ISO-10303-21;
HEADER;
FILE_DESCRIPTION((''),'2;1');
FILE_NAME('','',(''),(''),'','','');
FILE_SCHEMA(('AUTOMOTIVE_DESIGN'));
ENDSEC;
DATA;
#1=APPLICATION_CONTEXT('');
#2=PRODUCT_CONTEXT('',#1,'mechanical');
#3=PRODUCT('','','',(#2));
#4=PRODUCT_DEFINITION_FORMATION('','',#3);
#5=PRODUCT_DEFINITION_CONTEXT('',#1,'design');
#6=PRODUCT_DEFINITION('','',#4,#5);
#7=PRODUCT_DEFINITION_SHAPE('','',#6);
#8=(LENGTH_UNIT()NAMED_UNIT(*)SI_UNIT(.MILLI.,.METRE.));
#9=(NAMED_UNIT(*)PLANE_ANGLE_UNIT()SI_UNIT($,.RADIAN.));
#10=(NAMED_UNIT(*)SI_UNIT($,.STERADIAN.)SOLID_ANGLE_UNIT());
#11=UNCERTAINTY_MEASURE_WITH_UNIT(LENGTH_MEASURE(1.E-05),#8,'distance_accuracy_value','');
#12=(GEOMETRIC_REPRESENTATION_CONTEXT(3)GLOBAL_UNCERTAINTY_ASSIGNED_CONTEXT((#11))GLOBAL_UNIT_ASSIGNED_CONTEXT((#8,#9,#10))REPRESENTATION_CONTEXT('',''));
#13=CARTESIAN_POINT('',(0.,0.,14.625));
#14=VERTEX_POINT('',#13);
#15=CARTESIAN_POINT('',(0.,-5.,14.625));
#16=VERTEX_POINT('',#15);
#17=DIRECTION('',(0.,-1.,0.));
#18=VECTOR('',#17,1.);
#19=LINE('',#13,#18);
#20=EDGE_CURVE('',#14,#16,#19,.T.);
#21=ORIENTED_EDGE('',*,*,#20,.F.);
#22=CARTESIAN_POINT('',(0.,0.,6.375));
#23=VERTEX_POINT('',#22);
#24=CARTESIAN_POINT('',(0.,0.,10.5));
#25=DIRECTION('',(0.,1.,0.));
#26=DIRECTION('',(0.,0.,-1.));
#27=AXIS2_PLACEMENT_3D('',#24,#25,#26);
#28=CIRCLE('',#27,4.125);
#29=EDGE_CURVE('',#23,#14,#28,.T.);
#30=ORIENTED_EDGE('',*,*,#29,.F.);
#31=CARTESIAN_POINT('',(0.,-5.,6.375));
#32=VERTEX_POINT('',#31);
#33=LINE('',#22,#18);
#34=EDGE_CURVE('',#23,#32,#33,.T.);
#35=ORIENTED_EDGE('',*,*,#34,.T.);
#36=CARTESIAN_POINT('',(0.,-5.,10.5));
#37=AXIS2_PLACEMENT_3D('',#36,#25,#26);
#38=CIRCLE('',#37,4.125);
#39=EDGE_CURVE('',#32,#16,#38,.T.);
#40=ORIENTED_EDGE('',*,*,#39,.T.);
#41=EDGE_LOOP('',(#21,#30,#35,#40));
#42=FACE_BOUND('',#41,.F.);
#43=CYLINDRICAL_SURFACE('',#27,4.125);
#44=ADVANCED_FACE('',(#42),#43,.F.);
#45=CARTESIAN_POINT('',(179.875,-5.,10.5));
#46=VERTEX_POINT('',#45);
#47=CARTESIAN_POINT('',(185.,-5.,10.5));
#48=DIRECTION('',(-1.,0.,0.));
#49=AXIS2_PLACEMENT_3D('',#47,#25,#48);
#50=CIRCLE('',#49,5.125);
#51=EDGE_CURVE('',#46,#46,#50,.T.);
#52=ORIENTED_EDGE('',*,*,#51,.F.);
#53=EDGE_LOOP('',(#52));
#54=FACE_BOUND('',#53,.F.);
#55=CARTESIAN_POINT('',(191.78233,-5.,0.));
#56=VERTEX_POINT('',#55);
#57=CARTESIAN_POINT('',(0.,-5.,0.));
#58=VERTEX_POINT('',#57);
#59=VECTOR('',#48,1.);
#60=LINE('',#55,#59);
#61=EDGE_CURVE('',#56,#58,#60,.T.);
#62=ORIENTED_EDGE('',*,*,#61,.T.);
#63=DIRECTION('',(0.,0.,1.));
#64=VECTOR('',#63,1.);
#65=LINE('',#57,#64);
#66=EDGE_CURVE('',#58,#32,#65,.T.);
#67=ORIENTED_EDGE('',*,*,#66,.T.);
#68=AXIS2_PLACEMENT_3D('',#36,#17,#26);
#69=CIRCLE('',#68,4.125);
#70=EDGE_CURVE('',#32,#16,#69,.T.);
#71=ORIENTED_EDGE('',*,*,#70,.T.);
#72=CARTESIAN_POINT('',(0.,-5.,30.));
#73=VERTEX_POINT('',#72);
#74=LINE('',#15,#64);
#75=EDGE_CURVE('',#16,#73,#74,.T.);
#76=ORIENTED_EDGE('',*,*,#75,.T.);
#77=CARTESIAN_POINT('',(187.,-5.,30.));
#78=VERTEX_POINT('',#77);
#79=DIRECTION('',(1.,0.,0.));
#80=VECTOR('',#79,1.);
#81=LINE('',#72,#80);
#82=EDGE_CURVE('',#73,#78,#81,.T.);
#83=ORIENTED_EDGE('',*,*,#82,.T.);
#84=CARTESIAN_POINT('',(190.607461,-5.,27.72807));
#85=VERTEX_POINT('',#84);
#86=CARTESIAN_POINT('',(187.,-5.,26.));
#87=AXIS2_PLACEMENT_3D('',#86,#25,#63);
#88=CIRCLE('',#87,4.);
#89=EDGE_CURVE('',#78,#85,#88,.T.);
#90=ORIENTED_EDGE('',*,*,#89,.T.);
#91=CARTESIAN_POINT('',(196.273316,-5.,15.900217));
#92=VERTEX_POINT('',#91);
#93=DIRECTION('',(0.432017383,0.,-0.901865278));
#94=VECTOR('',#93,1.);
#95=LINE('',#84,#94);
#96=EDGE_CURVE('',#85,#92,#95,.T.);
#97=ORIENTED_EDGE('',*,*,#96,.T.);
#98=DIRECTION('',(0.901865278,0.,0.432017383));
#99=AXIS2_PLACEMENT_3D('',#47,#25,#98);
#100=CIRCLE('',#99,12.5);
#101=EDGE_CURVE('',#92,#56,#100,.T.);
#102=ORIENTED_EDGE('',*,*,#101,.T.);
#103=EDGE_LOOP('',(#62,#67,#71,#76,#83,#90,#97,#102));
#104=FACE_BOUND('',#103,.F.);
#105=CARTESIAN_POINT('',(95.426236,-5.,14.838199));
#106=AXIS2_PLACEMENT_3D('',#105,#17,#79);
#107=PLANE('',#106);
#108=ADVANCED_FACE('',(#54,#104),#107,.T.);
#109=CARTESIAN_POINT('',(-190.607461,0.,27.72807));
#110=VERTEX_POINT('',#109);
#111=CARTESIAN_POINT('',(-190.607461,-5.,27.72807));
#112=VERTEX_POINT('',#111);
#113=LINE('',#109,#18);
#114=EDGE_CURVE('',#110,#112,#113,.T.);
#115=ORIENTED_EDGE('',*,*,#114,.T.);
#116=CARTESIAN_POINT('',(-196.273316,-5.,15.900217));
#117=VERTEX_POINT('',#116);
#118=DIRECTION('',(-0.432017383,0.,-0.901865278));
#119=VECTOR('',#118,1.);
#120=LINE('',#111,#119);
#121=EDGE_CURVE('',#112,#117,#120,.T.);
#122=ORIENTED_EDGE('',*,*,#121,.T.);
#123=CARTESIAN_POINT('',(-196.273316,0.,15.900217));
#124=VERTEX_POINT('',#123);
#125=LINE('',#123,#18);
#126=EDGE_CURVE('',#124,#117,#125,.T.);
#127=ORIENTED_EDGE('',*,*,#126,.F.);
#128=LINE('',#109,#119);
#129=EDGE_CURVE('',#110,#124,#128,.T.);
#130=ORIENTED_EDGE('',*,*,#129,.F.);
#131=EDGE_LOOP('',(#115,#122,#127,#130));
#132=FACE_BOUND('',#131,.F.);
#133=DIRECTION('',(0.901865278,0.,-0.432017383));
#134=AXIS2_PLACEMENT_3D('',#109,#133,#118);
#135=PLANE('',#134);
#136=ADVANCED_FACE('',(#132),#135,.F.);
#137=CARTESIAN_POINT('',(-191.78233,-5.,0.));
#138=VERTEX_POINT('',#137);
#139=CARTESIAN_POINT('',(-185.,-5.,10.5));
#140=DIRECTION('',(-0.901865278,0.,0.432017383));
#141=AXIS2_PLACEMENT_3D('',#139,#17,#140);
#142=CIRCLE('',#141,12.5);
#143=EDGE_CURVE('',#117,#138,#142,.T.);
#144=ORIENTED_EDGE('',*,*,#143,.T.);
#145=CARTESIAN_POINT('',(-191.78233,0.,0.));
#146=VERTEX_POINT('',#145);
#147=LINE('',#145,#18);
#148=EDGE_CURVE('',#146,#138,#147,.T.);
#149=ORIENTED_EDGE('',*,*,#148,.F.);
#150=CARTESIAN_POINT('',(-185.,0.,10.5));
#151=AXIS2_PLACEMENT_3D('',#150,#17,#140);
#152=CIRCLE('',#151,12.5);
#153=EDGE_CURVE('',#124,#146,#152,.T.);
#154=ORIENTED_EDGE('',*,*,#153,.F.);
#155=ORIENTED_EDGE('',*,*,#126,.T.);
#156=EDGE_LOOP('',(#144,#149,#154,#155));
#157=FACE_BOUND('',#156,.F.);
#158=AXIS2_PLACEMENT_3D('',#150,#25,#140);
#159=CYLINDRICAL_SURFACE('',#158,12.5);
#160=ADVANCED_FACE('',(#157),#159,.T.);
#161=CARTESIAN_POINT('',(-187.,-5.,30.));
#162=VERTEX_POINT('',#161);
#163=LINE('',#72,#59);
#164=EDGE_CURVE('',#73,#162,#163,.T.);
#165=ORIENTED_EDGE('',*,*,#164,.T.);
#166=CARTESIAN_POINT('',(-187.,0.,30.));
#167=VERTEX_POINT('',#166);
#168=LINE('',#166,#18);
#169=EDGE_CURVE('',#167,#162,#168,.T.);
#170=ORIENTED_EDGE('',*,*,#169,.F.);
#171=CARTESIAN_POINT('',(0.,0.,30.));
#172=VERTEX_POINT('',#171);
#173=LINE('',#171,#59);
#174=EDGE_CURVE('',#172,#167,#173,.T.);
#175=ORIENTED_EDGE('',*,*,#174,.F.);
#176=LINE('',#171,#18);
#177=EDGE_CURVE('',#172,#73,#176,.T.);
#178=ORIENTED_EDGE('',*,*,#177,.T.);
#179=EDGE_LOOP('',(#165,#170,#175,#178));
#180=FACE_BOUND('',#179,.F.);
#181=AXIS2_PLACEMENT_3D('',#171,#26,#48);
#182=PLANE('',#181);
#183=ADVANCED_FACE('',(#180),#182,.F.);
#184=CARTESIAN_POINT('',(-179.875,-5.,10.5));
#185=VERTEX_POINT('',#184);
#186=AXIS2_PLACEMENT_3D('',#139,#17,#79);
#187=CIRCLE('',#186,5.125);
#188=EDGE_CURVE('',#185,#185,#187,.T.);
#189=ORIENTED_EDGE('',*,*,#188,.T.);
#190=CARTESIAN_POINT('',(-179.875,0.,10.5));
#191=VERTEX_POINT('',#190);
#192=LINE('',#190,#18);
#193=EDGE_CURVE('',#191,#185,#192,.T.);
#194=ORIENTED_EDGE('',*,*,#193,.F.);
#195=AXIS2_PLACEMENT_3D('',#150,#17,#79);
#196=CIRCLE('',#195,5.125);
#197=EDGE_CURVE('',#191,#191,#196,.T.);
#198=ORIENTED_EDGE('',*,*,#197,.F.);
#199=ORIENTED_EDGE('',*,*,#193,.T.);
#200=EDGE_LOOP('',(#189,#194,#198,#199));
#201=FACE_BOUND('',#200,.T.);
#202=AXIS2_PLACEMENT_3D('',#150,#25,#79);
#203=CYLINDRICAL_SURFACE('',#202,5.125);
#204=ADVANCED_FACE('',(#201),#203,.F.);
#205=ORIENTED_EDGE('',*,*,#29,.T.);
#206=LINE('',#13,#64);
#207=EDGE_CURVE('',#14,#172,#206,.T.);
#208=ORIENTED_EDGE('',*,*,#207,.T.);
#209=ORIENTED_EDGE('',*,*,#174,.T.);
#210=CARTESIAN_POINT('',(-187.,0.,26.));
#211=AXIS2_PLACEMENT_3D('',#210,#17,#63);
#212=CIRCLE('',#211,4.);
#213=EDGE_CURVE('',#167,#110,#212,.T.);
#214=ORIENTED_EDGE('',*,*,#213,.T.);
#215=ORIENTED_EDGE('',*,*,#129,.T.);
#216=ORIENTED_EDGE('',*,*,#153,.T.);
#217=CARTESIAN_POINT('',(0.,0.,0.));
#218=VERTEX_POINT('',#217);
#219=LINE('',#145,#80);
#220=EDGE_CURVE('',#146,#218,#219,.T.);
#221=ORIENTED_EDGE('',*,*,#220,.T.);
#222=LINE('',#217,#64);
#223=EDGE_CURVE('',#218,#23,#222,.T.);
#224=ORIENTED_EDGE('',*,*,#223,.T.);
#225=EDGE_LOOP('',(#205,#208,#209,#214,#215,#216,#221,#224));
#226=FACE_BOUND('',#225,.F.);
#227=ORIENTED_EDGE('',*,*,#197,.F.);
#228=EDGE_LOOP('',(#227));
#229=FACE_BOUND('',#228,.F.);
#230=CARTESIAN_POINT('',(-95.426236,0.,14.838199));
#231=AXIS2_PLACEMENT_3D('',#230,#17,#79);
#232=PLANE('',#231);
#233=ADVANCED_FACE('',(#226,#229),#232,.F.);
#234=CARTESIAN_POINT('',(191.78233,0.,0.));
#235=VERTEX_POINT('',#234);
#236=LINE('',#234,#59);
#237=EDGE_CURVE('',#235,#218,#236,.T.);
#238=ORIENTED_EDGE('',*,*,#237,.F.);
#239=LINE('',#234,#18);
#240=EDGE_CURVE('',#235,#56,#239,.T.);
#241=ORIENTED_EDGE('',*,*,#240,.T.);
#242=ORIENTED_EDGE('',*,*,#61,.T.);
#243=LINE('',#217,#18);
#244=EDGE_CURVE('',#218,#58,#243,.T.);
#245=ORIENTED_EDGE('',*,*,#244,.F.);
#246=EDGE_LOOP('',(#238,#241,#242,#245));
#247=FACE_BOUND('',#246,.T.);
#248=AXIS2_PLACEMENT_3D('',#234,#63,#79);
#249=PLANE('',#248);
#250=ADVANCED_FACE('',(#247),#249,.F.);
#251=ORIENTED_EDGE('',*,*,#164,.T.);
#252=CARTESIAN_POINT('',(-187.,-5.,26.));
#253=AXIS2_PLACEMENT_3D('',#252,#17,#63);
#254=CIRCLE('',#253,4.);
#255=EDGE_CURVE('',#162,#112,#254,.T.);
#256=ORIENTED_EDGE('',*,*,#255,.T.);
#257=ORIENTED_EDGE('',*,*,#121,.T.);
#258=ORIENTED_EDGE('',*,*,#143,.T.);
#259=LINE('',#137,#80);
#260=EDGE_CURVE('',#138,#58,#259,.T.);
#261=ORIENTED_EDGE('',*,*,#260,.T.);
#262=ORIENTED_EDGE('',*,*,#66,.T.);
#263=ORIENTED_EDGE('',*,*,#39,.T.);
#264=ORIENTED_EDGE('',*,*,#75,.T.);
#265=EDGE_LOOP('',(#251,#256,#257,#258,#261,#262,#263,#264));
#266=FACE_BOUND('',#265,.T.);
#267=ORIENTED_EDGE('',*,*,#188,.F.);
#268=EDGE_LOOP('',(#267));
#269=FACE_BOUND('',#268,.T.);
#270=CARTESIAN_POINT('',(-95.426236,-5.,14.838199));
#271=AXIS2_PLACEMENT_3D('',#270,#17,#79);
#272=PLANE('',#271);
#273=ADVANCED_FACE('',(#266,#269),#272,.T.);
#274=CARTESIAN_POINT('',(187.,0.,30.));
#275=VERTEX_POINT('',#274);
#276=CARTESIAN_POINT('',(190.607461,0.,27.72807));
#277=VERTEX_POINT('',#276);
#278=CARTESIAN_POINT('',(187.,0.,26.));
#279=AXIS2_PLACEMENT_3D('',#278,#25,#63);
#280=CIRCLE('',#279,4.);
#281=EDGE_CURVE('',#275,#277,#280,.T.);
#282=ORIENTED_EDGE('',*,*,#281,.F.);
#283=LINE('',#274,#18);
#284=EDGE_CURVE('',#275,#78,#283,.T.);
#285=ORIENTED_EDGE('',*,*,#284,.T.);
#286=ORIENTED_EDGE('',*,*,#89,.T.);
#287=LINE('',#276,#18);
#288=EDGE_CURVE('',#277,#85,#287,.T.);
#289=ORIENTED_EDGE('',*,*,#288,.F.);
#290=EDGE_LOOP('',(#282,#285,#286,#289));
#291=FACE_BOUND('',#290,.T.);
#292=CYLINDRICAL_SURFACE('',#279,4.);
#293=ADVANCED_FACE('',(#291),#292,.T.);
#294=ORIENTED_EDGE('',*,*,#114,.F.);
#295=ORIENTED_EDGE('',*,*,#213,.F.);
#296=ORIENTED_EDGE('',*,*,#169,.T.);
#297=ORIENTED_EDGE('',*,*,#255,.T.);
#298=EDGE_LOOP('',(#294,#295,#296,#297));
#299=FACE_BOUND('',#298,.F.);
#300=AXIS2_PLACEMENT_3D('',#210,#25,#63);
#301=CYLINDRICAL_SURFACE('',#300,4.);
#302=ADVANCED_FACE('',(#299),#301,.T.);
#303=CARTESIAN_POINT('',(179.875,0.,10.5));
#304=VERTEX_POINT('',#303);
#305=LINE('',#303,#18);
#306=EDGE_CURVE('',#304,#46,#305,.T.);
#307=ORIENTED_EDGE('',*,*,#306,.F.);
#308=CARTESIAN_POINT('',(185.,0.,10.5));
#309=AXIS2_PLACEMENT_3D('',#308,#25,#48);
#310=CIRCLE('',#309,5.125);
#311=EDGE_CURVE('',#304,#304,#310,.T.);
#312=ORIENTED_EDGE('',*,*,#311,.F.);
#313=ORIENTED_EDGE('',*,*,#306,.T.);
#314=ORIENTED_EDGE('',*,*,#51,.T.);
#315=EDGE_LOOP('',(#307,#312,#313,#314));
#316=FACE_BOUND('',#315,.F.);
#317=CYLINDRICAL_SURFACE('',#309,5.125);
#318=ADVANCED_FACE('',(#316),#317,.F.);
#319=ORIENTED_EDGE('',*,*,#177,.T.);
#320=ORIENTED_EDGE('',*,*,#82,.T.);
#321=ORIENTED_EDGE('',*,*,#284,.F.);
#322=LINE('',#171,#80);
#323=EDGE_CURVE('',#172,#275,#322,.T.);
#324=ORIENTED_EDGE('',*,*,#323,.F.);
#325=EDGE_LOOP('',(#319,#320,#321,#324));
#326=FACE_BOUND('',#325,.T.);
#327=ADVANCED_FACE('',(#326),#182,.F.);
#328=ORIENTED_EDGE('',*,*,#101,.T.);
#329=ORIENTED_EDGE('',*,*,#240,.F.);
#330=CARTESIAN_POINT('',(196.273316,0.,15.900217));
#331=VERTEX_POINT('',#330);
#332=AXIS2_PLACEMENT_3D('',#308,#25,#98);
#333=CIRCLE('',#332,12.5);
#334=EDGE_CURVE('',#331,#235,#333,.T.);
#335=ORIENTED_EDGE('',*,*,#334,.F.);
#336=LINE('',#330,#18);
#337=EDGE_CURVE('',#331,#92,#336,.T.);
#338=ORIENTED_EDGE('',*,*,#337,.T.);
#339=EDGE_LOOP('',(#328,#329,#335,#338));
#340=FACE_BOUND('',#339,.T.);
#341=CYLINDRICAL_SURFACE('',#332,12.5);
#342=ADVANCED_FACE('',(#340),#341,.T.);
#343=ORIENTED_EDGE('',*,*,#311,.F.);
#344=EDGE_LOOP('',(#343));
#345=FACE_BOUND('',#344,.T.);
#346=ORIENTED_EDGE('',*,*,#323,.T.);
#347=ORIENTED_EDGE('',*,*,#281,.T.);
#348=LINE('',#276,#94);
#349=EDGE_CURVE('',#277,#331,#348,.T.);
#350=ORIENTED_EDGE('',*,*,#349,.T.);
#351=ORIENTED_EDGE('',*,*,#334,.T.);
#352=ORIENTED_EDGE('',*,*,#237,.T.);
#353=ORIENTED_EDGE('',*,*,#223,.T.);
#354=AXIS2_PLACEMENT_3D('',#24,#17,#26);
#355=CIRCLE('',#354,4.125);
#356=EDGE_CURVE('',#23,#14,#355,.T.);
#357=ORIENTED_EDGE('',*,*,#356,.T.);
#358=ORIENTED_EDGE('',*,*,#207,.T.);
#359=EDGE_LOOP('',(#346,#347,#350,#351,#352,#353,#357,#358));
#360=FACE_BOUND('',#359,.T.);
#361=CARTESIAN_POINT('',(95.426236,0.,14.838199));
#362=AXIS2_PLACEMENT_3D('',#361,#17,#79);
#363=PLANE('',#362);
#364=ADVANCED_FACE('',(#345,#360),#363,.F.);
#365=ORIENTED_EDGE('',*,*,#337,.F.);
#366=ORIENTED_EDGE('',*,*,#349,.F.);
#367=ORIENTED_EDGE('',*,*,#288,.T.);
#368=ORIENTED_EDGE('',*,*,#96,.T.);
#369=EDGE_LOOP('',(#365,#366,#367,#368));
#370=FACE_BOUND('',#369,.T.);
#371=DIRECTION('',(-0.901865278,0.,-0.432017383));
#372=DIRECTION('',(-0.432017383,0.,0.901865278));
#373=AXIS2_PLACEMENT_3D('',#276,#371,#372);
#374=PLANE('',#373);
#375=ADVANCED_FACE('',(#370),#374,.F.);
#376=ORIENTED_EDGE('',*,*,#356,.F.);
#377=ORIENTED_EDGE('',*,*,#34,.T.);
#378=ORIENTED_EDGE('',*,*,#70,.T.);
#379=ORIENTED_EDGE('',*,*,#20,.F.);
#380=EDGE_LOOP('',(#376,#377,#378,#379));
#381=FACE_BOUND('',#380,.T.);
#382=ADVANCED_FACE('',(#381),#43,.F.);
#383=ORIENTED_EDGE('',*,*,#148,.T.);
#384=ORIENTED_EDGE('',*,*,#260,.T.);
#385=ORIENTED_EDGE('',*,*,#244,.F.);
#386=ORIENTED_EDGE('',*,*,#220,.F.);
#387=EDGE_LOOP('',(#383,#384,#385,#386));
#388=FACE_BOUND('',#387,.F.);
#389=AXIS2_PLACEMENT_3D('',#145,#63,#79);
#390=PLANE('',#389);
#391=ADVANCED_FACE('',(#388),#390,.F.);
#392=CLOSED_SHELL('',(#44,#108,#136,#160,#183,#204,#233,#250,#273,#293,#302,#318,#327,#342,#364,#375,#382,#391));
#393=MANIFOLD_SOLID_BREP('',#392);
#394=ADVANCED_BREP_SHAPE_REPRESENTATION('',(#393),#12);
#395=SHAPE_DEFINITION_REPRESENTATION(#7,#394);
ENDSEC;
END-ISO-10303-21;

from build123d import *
from build123d import SkipClean  # not in build123d's __all__

# Parameters (mm, degrees)
F0_R     = 5.125
F1_DEPTH = 5


with BuildPart() as f1:
    # F0 (on Front) → F1 (new body)
    with BuildSketch(Plane.XZ):
        with BuildLine():
            Line((-191.7823299831, 0), (0, 0))
            Line((0, 0), (0, 6.375))
            ThreePointArc((0, 6.375), (-4.125, 10.5), (0, 14.625))
            Line((0, 14.625), (0, 30))
            Line((0, 30), (-187, 30))
            ThreePointArc((-187, 30), (-189.1316333954, 29.3846918719), (-190.6074611137, 27.7280695337))
            Line((-190.6074611137, 27.7280695337), (-196.2733159802, 15.9002172929))
            ThreePointArc((-196.2733159802, 15.9002172929), (-197.029373021, 7.1023265723), (-191.7823299831, 0))
        make_face()
        with Locations((-185, 10.5)):
            Circle(F0_R, mode=Mode.SUBTRACT)
    extrude(amount=F1_DEPTH)

    # F2: F1 across plane


with BuildPart() as f1_1:
    add(f1.part, clean=False)
    with SkipClean():  # cleaning this boolean's faces spoils the solid; the shape is the same uncleaned
        add(f1.part.mirror(Plane.YZ), clean=False)


solid = f1_1.part
